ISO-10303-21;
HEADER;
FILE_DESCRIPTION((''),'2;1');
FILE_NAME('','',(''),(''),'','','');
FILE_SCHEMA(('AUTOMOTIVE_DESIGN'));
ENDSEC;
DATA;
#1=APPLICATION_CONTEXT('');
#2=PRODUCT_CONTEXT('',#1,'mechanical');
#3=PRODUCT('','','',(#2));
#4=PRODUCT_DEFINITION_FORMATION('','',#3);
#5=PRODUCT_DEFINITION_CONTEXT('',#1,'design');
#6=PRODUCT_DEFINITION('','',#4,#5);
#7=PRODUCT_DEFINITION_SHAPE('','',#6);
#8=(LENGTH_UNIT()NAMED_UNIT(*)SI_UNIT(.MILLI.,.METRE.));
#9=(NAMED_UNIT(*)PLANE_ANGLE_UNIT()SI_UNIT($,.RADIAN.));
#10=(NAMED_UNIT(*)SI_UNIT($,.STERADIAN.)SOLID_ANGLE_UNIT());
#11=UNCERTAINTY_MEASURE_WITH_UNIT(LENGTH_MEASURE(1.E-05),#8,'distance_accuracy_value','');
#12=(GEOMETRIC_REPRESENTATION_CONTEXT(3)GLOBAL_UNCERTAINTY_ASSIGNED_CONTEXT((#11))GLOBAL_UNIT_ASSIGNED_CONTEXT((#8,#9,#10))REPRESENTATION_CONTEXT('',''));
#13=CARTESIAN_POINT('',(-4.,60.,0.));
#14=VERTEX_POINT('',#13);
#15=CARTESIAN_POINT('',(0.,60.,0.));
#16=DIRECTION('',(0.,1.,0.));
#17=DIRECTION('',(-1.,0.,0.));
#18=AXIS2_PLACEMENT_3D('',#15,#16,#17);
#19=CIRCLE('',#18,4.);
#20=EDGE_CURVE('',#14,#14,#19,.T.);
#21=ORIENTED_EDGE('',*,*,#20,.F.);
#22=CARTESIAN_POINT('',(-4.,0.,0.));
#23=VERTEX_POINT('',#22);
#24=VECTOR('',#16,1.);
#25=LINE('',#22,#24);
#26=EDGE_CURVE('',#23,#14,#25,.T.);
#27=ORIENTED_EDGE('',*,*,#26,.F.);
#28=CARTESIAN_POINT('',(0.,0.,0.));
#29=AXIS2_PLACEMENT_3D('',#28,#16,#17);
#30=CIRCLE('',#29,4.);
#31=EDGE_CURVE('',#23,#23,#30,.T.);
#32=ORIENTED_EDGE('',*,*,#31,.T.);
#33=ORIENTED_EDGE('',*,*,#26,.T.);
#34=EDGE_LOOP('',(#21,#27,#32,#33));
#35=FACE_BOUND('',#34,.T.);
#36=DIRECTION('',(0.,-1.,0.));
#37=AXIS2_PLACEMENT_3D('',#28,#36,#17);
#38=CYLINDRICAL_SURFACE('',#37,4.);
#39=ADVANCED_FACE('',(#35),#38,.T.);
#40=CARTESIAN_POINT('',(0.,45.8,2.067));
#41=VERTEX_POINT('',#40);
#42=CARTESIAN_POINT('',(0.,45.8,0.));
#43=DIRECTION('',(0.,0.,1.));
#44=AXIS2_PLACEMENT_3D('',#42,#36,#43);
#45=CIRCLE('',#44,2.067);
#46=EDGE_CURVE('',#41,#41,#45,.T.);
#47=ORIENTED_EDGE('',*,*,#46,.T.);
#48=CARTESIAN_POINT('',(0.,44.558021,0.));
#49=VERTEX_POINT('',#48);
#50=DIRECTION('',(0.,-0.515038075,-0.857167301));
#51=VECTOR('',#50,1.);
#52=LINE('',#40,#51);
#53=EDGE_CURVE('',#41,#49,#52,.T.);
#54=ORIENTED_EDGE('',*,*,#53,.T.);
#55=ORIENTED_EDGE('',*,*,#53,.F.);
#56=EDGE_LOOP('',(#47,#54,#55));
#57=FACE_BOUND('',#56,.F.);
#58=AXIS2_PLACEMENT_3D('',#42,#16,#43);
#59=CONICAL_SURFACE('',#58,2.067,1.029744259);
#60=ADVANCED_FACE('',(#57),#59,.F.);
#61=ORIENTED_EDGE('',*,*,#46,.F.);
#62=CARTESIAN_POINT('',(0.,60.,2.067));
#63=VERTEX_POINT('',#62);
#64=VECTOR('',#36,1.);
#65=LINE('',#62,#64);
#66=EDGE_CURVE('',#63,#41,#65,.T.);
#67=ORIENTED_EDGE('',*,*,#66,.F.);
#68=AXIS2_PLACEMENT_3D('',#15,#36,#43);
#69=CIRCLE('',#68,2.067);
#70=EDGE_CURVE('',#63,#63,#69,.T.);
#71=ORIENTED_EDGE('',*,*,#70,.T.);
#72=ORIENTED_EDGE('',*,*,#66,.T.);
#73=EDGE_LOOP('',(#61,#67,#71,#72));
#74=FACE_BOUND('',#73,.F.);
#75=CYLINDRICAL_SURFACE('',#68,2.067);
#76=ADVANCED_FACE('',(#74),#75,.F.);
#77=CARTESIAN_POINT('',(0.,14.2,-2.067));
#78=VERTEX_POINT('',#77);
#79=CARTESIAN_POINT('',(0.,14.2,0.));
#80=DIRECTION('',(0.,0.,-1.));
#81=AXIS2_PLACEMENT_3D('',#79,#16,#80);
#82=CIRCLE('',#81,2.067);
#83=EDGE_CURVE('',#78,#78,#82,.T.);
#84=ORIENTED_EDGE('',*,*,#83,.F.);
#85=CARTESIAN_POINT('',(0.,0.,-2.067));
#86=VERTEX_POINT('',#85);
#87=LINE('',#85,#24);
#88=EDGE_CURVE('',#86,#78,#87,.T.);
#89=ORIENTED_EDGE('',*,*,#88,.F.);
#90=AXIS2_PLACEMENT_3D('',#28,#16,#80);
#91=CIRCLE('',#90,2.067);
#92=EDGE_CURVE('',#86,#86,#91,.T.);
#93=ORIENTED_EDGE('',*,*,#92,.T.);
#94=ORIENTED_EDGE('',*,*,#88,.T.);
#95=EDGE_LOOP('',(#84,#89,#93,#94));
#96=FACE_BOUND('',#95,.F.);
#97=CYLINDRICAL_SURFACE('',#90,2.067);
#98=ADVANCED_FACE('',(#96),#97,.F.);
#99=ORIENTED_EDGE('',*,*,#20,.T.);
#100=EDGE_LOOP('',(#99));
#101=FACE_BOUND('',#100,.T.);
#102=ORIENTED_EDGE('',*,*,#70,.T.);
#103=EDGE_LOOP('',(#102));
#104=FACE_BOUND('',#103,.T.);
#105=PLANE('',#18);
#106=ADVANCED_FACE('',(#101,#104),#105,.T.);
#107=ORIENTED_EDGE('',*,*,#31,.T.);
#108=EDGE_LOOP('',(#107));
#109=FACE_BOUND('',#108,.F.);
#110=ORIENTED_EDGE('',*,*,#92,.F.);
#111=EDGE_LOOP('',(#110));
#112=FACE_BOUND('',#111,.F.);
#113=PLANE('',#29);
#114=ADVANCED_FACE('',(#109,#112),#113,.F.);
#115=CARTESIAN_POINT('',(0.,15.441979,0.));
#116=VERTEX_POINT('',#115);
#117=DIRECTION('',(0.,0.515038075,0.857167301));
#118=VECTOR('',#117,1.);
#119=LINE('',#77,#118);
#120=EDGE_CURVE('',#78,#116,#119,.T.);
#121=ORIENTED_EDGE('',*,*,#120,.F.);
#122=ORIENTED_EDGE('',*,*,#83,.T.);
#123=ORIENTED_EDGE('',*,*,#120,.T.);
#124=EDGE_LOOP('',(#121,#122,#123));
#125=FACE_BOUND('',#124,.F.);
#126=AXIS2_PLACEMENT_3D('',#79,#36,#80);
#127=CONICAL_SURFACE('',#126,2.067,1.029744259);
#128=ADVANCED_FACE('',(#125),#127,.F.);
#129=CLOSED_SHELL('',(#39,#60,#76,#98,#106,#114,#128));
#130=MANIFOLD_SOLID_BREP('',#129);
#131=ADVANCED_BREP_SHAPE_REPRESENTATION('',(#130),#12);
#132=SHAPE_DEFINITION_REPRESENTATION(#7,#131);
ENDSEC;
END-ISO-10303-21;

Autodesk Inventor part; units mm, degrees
ref_plane "YZ Plane" through (0, 0, 0) normal (1, 0, 0) x (0, 1, 0)
ref_plane "XZ Plane" through (0, 0, 0) normal (0, 1, 0) x (-1, 0, 0)
ref_plane "XY Plane" through (0, 0, 0) normal (0, 0, 1) x (1, 0, 0)
sketch "Esboço1" plane through (0, 0, 0) normal (0, 1, 0) x (-1, 0, 0)
  circle A0 centre (0, 0) radius 4
  dimension "d1" = 8
extrude "Extrusão1" add sketch "Esboço1" along normal blind 60
sketch "Esboço4" plane through (0, 60, 0) normal (0, 1, 0) x (1, 0, 0)
  circle A0 centre (0, 0) radius 4 projected
hole "Furo1" at (0, 60, 0) direction (0, -1, 0) diameter 4.134 depth 14.2 tip angle 118 thread size "M5x0.8" class "6H" standard "ISO Metric profile"
sketch "Esboço5" plane through (0, 0, 0) normal (0, -1, 0) x (1, 0, 0)
  circle A0 centre (0, 0) radius 4 projected
hole "Furo2" at (0, 0, 0) direction (0, 1, 0) diameter 4.134 depth 14.2 tip angle 118 thread size "M5x0.8" class "6H" standard "ISO Metric profile"
equation "\"Raio_vergadura\" = Espessura"
equation "\"Largura_alívio_de_vergadura\" = Espessura"
equation "\"Profundidade_alívio_de_vergadura\" = 0.5 * Espessura"
equation "\"Tamanho_alívio_de_dobra\" = 4 * Espessura"
equation "\"Remanescente_mínimo\" = 2 * Espessura"
equation "\"Raiodetransição\" = Raio_vergadura"
equation "\"Tamanho_de_raio_de_Jacobi\" = Raio_vergadura"
equation "\"TamanhoFolga\" = Espessura"
equation "\"Espessura\" = 0.5"
properties part number "Suporte da base de apoio" material "Latão, amarelo macio"
